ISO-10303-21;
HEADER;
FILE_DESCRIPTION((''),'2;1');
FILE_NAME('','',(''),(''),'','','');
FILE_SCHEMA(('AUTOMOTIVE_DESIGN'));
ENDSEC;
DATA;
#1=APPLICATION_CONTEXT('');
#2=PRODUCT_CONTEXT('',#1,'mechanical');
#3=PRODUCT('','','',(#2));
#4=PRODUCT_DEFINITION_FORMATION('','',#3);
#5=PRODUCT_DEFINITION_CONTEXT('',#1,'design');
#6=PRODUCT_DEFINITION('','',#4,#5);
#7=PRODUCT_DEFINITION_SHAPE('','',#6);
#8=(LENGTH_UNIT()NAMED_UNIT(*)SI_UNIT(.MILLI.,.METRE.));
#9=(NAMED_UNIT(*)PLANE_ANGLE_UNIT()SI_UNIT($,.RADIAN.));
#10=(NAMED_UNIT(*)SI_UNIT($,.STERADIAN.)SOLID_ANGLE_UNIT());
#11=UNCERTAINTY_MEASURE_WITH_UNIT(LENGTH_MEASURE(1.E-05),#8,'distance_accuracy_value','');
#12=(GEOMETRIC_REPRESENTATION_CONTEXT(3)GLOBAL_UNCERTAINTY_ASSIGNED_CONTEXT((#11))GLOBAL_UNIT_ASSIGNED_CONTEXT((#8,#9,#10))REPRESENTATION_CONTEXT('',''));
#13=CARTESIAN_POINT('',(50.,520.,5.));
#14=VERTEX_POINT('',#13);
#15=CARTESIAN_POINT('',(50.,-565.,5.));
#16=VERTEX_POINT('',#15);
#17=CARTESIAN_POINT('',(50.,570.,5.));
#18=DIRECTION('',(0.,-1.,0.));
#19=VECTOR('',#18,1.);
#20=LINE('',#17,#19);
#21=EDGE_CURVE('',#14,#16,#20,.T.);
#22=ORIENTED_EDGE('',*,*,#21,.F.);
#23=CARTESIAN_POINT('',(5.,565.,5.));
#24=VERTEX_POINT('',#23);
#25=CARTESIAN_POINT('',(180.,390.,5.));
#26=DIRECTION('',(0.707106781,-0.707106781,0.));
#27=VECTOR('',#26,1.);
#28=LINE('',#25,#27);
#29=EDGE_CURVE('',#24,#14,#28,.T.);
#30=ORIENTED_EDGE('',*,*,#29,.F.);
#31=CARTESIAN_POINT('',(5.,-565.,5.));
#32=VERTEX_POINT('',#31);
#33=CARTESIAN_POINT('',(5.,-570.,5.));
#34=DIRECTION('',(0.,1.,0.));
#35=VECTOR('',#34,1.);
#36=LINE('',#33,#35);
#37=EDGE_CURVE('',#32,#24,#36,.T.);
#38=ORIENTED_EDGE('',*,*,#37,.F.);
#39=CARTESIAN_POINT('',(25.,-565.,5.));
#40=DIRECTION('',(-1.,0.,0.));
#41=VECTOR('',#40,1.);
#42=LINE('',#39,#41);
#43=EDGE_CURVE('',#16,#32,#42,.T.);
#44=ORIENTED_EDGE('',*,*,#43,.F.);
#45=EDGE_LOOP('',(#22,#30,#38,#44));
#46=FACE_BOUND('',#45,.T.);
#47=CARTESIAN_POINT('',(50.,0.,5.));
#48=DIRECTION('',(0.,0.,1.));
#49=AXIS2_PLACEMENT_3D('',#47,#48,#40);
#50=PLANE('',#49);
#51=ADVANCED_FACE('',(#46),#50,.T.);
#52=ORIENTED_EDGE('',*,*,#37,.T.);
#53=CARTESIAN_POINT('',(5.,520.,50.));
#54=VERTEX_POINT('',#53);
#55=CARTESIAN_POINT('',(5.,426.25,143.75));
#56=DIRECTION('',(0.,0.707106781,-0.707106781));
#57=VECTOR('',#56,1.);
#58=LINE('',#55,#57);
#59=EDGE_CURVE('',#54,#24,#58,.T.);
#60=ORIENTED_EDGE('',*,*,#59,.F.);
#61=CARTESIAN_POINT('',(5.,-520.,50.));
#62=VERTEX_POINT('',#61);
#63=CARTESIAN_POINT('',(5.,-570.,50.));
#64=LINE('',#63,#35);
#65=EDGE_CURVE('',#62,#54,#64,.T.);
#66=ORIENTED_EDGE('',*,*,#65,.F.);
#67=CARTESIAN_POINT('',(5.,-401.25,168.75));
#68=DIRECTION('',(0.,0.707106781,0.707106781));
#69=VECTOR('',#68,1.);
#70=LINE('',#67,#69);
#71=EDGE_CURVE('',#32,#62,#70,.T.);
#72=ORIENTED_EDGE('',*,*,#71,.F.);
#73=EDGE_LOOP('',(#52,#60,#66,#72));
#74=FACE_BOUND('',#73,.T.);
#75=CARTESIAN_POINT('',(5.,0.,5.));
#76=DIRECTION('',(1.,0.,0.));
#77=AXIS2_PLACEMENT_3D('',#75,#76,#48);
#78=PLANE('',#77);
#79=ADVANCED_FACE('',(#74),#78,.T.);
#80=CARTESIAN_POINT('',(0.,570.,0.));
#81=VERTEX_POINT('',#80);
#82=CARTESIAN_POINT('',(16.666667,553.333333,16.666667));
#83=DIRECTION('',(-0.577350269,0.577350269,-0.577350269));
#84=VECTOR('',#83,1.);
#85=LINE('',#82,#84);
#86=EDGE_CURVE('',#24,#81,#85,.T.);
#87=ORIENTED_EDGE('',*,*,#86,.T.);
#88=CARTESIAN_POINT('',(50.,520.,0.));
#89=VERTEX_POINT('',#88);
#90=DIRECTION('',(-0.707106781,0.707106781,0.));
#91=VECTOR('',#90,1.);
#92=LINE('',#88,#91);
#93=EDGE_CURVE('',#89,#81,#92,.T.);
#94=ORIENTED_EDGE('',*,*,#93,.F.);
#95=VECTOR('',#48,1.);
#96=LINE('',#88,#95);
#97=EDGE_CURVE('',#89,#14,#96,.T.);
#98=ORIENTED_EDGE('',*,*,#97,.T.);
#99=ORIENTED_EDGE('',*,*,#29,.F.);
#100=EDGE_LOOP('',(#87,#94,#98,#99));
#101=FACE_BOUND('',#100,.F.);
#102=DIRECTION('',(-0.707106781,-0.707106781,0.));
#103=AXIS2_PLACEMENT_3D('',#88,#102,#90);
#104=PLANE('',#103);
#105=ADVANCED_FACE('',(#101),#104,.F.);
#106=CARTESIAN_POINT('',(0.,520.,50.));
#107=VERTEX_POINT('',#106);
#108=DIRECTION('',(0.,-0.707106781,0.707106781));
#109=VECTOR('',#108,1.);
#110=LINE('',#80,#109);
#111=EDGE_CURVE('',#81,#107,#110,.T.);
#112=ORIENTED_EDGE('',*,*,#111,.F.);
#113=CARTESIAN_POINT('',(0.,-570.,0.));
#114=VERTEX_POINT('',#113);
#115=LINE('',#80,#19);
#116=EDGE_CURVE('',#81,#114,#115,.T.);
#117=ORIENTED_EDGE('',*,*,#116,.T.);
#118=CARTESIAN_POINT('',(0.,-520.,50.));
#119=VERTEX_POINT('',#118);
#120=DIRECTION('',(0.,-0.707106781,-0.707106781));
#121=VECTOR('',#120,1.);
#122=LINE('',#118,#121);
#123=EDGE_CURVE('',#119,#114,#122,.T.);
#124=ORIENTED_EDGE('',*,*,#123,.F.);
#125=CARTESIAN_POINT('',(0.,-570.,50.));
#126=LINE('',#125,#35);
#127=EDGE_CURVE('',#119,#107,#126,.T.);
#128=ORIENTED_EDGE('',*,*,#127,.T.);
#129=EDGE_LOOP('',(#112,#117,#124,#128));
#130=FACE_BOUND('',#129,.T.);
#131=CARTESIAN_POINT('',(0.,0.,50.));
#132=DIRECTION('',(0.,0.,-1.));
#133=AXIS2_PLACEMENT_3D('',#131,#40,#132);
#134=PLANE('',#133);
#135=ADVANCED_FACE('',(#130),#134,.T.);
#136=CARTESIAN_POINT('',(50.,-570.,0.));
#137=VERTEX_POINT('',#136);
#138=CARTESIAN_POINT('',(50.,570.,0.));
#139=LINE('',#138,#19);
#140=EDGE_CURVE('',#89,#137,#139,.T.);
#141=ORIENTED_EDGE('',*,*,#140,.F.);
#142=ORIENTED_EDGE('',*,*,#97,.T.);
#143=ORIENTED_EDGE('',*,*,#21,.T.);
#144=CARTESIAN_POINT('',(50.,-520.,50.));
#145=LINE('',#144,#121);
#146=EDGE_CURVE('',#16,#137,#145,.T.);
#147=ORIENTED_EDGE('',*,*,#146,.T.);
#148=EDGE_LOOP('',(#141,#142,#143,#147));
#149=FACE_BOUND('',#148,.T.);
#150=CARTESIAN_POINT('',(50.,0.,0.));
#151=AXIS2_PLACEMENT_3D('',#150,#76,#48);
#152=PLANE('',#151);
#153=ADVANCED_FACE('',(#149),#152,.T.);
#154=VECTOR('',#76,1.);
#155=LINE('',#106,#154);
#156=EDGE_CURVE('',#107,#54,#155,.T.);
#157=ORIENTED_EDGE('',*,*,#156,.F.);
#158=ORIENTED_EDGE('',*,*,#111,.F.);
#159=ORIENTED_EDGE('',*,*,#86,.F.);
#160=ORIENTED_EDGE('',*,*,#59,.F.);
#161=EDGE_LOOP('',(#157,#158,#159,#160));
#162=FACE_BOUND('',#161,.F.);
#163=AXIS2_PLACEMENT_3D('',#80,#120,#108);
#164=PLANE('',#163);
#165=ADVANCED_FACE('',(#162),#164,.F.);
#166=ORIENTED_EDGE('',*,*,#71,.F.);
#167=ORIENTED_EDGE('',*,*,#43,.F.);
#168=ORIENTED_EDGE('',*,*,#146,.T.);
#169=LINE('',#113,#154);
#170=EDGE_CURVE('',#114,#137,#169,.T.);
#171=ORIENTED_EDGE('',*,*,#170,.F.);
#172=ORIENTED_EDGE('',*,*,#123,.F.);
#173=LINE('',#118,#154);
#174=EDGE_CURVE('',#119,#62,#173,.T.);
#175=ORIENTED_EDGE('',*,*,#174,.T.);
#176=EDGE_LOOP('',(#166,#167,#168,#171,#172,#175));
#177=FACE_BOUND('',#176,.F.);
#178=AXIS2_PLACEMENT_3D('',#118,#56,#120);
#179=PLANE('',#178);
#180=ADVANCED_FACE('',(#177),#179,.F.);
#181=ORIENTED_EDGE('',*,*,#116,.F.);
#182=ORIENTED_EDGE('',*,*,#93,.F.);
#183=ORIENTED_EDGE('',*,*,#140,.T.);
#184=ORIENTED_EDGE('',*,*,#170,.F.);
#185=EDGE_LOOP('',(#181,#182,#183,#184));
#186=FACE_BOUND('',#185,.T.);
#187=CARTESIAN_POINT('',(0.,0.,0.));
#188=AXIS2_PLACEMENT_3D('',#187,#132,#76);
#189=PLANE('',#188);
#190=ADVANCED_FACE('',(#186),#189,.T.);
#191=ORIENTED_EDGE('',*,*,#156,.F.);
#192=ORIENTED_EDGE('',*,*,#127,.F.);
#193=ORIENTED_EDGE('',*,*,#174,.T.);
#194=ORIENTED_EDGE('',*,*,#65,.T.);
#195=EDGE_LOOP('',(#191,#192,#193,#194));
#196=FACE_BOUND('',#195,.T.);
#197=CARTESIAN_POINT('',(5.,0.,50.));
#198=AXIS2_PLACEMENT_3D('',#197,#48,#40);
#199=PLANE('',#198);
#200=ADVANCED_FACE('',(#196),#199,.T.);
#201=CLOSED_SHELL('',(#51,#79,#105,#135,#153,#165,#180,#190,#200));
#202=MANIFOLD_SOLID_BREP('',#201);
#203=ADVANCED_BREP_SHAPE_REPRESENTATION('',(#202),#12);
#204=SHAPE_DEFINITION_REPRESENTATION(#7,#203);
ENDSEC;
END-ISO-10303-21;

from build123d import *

# Parameters (mm, degrees)
F1_DEPTH = 570
F3_DEPTH = 50
F5_DEPTH = 50


# Not quite as in the source:
# - a feature names something its author has since deleted; it is built from what else it names


with BuildPart() as f1:
    # F0 (on Front) → F1 (new body, symmetric)
    with BuildSketch(Plane.XZ):
        Polygon((0, 50), (0, 0), (50, 0), (50, 5), (5, 5), (5, 50), align=None)
    extrude(amount=F1_DEPTH, both=True)

    # F2 (on face) → F3 (cut)
    with BuildSketch(Plane(origin=(0, 0, 0), x_dir=(0, -1, 0), z_dir=(-1, 0, 0))):
        Polygon((-570, 50), (-570, 0), (-520, 50), align=None)
        Polygon((520, 50), (570, 0), (570, 50), align=None)
    extrude(amount=-F3_DEPTH, mode=Mode.SUBTRACT)

    # F4 (on face) → F5 (cut)
    with BuildSketch(Plane(origin=(0, 0, 0), x_dir=(1, 0, 0), z_dir=(0, 0, -1))):
        Polygon((50, -520), (0, -570), (50, -570), align=None)
    extrude(amount=-F5_DEPTH, mode=Mode.SUBTRACT)


solid = f1.part
